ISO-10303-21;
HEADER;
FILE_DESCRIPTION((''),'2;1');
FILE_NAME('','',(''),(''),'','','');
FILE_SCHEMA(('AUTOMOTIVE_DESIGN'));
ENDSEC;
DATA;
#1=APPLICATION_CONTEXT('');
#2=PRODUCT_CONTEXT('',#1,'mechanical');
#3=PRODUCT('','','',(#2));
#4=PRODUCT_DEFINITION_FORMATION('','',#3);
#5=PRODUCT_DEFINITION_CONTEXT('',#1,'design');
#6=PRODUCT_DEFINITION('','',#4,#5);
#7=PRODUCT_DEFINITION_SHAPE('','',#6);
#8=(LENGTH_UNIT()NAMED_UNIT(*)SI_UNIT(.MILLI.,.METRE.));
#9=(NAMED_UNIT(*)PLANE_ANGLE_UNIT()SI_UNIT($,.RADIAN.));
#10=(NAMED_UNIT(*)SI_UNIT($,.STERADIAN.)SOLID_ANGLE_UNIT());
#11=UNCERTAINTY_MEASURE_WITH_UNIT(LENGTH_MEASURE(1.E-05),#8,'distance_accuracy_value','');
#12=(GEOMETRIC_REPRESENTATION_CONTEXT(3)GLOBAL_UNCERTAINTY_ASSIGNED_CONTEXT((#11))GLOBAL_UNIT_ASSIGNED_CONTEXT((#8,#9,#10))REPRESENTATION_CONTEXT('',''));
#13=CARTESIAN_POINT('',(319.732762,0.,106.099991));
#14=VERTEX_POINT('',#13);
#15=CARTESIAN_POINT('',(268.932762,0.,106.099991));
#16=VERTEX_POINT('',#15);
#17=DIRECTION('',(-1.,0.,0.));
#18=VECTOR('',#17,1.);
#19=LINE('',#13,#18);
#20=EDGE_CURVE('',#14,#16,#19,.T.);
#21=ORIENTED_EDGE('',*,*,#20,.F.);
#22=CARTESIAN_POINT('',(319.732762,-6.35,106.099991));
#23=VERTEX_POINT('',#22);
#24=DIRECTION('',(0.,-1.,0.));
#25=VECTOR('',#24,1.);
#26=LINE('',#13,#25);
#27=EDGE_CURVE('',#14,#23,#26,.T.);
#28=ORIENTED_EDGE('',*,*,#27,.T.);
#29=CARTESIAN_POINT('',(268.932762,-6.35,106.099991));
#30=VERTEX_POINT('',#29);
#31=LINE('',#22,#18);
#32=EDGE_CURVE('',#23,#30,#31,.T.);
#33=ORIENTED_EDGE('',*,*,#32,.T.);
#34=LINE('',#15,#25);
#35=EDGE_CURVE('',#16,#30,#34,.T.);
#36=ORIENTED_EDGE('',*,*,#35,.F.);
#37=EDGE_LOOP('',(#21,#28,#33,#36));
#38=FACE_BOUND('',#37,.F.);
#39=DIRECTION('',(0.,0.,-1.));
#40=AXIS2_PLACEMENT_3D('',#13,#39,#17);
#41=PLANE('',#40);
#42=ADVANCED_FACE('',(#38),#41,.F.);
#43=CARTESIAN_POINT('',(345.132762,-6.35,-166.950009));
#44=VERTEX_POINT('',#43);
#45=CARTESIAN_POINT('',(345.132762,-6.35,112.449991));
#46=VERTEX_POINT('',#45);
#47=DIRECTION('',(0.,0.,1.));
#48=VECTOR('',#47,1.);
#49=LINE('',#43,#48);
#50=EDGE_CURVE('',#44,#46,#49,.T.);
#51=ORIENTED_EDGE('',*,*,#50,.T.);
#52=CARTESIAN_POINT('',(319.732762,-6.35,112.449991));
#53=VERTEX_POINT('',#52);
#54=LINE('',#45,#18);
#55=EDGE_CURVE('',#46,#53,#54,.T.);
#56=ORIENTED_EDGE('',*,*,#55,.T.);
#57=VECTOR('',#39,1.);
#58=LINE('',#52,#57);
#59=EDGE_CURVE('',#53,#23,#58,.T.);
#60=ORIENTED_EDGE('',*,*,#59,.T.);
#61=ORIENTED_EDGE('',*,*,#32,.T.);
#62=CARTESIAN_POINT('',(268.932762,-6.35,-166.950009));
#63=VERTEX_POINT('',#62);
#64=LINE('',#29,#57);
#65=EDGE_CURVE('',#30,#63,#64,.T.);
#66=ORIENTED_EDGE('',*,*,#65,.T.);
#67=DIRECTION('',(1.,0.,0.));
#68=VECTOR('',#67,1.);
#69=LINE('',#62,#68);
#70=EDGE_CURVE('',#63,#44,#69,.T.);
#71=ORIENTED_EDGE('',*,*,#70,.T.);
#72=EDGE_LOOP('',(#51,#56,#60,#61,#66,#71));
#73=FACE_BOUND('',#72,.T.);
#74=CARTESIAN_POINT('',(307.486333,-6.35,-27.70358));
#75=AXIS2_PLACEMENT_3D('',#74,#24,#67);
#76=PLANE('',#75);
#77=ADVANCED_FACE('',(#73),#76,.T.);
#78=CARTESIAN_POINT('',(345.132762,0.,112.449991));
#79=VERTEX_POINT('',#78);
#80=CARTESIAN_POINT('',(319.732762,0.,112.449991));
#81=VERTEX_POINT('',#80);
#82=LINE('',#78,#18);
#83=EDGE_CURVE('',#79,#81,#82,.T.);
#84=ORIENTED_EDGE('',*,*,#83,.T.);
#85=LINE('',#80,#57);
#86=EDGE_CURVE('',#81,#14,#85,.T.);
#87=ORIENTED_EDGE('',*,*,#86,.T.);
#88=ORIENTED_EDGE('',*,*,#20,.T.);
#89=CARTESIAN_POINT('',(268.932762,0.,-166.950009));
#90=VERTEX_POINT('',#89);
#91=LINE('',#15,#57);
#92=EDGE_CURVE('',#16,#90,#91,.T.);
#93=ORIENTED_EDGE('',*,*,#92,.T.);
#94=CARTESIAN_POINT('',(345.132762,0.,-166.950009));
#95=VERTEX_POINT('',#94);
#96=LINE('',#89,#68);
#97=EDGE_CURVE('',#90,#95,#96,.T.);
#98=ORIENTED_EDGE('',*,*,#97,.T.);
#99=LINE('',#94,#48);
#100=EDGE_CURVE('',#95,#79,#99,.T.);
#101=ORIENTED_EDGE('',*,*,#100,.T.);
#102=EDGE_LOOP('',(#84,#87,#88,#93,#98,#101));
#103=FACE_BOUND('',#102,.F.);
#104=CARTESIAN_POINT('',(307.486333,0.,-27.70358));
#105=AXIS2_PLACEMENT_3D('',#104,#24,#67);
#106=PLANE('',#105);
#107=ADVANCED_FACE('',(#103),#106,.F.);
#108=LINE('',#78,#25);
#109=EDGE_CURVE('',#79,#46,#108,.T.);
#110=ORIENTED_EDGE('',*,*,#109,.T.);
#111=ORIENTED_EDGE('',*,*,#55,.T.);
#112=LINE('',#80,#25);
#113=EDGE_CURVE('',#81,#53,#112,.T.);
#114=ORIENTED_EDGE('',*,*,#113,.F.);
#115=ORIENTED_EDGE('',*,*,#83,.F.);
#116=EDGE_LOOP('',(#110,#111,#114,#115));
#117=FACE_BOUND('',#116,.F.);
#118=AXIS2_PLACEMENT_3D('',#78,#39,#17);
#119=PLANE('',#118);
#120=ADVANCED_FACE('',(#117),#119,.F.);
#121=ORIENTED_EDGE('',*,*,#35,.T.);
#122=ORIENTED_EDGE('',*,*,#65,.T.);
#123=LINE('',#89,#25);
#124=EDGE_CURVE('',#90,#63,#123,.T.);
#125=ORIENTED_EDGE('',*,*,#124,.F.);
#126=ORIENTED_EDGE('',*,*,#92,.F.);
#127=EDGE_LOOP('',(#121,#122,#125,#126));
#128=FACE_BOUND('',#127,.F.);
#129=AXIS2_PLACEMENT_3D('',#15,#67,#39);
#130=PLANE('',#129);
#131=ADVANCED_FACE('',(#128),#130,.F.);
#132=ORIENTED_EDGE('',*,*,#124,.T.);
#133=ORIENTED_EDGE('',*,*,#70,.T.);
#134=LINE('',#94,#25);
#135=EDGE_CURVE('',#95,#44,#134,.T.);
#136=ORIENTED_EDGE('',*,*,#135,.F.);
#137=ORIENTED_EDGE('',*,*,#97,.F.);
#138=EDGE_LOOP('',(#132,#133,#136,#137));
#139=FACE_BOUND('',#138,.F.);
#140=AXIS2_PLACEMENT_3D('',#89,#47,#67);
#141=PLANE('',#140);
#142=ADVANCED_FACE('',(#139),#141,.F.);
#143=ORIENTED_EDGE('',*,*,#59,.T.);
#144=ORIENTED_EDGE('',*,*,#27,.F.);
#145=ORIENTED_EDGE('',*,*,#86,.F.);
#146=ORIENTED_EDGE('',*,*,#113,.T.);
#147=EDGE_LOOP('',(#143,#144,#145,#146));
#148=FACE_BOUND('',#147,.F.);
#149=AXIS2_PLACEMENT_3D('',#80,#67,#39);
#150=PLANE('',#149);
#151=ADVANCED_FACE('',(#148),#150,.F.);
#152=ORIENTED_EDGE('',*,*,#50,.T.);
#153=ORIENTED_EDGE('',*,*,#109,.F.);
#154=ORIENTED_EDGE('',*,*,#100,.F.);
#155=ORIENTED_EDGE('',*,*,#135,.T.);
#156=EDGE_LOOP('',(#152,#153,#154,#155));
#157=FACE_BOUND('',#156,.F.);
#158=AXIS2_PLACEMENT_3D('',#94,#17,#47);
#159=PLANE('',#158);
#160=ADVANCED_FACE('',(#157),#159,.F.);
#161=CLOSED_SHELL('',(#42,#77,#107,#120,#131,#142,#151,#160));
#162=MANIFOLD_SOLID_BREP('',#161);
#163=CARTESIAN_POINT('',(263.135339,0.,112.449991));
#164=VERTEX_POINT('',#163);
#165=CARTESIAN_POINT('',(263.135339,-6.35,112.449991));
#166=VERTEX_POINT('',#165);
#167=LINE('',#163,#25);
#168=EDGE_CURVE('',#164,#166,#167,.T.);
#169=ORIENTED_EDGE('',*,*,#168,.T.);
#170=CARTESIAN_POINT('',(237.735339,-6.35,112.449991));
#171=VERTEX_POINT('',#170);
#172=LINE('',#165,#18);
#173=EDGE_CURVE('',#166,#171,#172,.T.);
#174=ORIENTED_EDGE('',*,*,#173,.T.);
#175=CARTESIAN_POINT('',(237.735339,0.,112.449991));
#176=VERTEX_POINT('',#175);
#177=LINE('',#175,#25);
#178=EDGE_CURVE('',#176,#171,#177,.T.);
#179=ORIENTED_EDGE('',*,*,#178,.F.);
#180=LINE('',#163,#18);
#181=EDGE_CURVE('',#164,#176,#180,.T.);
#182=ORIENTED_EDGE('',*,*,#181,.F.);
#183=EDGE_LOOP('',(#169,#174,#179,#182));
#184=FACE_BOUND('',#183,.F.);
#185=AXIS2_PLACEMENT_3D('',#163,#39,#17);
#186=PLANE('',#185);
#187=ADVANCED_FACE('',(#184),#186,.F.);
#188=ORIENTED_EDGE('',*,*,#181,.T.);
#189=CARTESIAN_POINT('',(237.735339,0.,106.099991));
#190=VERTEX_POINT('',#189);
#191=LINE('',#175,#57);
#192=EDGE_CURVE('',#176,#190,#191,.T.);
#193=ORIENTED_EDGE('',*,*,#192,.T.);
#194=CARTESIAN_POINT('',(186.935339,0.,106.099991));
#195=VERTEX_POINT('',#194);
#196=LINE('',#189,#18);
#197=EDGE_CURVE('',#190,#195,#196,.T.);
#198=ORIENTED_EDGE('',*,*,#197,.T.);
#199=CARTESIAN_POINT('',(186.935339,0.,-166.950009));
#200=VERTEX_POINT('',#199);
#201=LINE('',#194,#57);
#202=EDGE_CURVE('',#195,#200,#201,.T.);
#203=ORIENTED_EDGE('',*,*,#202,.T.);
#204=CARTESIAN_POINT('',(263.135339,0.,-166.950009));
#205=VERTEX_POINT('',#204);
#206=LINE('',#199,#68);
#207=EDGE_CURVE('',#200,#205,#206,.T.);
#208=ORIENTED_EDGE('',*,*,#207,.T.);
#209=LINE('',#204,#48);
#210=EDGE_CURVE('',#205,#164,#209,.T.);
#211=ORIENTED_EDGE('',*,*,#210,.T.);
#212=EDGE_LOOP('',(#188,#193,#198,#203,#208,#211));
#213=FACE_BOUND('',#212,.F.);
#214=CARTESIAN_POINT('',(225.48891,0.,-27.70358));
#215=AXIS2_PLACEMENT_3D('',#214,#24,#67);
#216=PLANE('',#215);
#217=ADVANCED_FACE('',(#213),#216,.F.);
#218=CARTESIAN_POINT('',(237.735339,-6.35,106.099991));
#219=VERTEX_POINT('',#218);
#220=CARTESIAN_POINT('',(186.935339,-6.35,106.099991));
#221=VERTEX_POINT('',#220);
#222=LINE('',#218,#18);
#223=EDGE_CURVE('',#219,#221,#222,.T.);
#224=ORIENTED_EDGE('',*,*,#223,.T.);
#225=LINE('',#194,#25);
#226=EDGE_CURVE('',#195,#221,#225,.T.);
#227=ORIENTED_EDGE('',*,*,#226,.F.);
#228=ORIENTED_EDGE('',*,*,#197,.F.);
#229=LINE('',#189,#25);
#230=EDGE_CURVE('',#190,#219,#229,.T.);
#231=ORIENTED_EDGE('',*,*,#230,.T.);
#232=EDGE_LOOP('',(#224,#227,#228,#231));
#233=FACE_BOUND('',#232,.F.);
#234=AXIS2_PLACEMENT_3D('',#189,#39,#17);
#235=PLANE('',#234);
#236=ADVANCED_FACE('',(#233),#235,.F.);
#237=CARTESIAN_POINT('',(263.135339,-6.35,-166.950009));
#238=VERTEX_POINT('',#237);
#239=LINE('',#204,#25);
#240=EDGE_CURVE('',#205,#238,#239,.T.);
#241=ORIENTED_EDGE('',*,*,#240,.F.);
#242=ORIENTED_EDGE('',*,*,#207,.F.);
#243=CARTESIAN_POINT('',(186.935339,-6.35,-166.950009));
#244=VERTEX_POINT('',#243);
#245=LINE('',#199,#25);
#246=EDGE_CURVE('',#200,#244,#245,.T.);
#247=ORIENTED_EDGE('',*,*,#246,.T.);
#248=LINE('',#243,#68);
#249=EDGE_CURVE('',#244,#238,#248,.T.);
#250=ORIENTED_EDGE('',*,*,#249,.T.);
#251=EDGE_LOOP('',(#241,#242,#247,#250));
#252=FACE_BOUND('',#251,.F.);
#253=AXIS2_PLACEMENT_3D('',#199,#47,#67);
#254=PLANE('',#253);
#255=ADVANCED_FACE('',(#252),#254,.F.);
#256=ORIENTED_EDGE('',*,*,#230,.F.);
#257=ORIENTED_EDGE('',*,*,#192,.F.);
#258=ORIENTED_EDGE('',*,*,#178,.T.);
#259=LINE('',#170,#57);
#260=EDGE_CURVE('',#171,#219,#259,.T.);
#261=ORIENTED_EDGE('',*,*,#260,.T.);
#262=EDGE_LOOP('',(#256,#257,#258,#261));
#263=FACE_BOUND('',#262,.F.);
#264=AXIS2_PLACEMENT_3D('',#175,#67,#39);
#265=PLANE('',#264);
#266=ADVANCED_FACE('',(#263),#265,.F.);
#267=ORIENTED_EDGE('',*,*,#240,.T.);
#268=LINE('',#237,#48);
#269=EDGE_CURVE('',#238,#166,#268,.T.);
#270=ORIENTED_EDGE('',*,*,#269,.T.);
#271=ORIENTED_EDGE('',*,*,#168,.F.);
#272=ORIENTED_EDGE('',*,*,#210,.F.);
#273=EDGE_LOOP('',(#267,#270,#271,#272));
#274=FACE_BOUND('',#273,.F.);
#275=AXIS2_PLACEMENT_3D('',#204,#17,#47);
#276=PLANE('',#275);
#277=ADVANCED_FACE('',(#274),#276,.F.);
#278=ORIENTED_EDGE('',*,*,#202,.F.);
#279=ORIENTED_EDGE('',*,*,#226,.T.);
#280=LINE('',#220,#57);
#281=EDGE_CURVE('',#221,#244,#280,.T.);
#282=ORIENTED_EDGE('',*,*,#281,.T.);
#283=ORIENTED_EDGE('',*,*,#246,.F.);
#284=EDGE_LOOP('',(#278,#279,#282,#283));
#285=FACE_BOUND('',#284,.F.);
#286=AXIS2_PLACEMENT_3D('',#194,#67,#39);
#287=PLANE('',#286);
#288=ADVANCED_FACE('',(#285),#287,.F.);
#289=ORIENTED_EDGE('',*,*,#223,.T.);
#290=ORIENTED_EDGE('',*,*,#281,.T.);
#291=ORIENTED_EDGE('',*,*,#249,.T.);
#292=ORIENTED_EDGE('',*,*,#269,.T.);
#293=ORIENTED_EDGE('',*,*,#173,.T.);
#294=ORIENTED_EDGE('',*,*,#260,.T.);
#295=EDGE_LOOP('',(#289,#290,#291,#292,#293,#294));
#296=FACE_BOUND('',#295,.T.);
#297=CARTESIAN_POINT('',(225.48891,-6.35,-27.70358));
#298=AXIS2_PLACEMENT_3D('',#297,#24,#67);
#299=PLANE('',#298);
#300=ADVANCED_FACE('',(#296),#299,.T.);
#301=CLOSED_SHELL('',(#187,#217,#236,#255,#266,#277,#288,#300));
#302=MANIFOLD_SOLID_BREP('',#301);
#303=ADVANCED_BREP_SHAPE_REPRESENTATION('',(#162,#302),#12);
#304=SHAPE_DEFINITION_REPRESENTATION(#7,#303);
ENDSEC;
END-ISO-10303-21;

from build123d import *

# Parameters (mm, degrees)
F1_DEPTH = 6.35


# Not quite as in the source:
# - a feature names something its author has since deleted; it is built from what else it names


with BuildPart() as f1:
    # F0 (on Front) → F1 (new body)
    with BuildSketch(Plane.XZ):
        Polygon((345.1327616, -166.950009), (345.1327616, 106.099991), (345.1327616, 112.449991), (319.7327616, 112.449991), (319.7327616, 106.099991), (268.9327616, 106.099991), (268.9327616, -166.950009), align=None)
    extrude(amount=F1_DEPTH)


with BuildPart() as f1b:
    # F0 (on Front) → F1, piece 2 (new body)
    with BuildSketch(Plane.XZ):
        Polygon((263.1353386, -166.950009), (263.1353386, 106.099991), (263.1353386, 112.449991), (237.7353386, 112.449991), (237.7353386, 106.099991), (186.9353386, 106.099991), (186.9353386, -166.950009), align=None)
    extrude(amount=F1_DEPTH)


solid = Compound([f1.part, f1b.part])
